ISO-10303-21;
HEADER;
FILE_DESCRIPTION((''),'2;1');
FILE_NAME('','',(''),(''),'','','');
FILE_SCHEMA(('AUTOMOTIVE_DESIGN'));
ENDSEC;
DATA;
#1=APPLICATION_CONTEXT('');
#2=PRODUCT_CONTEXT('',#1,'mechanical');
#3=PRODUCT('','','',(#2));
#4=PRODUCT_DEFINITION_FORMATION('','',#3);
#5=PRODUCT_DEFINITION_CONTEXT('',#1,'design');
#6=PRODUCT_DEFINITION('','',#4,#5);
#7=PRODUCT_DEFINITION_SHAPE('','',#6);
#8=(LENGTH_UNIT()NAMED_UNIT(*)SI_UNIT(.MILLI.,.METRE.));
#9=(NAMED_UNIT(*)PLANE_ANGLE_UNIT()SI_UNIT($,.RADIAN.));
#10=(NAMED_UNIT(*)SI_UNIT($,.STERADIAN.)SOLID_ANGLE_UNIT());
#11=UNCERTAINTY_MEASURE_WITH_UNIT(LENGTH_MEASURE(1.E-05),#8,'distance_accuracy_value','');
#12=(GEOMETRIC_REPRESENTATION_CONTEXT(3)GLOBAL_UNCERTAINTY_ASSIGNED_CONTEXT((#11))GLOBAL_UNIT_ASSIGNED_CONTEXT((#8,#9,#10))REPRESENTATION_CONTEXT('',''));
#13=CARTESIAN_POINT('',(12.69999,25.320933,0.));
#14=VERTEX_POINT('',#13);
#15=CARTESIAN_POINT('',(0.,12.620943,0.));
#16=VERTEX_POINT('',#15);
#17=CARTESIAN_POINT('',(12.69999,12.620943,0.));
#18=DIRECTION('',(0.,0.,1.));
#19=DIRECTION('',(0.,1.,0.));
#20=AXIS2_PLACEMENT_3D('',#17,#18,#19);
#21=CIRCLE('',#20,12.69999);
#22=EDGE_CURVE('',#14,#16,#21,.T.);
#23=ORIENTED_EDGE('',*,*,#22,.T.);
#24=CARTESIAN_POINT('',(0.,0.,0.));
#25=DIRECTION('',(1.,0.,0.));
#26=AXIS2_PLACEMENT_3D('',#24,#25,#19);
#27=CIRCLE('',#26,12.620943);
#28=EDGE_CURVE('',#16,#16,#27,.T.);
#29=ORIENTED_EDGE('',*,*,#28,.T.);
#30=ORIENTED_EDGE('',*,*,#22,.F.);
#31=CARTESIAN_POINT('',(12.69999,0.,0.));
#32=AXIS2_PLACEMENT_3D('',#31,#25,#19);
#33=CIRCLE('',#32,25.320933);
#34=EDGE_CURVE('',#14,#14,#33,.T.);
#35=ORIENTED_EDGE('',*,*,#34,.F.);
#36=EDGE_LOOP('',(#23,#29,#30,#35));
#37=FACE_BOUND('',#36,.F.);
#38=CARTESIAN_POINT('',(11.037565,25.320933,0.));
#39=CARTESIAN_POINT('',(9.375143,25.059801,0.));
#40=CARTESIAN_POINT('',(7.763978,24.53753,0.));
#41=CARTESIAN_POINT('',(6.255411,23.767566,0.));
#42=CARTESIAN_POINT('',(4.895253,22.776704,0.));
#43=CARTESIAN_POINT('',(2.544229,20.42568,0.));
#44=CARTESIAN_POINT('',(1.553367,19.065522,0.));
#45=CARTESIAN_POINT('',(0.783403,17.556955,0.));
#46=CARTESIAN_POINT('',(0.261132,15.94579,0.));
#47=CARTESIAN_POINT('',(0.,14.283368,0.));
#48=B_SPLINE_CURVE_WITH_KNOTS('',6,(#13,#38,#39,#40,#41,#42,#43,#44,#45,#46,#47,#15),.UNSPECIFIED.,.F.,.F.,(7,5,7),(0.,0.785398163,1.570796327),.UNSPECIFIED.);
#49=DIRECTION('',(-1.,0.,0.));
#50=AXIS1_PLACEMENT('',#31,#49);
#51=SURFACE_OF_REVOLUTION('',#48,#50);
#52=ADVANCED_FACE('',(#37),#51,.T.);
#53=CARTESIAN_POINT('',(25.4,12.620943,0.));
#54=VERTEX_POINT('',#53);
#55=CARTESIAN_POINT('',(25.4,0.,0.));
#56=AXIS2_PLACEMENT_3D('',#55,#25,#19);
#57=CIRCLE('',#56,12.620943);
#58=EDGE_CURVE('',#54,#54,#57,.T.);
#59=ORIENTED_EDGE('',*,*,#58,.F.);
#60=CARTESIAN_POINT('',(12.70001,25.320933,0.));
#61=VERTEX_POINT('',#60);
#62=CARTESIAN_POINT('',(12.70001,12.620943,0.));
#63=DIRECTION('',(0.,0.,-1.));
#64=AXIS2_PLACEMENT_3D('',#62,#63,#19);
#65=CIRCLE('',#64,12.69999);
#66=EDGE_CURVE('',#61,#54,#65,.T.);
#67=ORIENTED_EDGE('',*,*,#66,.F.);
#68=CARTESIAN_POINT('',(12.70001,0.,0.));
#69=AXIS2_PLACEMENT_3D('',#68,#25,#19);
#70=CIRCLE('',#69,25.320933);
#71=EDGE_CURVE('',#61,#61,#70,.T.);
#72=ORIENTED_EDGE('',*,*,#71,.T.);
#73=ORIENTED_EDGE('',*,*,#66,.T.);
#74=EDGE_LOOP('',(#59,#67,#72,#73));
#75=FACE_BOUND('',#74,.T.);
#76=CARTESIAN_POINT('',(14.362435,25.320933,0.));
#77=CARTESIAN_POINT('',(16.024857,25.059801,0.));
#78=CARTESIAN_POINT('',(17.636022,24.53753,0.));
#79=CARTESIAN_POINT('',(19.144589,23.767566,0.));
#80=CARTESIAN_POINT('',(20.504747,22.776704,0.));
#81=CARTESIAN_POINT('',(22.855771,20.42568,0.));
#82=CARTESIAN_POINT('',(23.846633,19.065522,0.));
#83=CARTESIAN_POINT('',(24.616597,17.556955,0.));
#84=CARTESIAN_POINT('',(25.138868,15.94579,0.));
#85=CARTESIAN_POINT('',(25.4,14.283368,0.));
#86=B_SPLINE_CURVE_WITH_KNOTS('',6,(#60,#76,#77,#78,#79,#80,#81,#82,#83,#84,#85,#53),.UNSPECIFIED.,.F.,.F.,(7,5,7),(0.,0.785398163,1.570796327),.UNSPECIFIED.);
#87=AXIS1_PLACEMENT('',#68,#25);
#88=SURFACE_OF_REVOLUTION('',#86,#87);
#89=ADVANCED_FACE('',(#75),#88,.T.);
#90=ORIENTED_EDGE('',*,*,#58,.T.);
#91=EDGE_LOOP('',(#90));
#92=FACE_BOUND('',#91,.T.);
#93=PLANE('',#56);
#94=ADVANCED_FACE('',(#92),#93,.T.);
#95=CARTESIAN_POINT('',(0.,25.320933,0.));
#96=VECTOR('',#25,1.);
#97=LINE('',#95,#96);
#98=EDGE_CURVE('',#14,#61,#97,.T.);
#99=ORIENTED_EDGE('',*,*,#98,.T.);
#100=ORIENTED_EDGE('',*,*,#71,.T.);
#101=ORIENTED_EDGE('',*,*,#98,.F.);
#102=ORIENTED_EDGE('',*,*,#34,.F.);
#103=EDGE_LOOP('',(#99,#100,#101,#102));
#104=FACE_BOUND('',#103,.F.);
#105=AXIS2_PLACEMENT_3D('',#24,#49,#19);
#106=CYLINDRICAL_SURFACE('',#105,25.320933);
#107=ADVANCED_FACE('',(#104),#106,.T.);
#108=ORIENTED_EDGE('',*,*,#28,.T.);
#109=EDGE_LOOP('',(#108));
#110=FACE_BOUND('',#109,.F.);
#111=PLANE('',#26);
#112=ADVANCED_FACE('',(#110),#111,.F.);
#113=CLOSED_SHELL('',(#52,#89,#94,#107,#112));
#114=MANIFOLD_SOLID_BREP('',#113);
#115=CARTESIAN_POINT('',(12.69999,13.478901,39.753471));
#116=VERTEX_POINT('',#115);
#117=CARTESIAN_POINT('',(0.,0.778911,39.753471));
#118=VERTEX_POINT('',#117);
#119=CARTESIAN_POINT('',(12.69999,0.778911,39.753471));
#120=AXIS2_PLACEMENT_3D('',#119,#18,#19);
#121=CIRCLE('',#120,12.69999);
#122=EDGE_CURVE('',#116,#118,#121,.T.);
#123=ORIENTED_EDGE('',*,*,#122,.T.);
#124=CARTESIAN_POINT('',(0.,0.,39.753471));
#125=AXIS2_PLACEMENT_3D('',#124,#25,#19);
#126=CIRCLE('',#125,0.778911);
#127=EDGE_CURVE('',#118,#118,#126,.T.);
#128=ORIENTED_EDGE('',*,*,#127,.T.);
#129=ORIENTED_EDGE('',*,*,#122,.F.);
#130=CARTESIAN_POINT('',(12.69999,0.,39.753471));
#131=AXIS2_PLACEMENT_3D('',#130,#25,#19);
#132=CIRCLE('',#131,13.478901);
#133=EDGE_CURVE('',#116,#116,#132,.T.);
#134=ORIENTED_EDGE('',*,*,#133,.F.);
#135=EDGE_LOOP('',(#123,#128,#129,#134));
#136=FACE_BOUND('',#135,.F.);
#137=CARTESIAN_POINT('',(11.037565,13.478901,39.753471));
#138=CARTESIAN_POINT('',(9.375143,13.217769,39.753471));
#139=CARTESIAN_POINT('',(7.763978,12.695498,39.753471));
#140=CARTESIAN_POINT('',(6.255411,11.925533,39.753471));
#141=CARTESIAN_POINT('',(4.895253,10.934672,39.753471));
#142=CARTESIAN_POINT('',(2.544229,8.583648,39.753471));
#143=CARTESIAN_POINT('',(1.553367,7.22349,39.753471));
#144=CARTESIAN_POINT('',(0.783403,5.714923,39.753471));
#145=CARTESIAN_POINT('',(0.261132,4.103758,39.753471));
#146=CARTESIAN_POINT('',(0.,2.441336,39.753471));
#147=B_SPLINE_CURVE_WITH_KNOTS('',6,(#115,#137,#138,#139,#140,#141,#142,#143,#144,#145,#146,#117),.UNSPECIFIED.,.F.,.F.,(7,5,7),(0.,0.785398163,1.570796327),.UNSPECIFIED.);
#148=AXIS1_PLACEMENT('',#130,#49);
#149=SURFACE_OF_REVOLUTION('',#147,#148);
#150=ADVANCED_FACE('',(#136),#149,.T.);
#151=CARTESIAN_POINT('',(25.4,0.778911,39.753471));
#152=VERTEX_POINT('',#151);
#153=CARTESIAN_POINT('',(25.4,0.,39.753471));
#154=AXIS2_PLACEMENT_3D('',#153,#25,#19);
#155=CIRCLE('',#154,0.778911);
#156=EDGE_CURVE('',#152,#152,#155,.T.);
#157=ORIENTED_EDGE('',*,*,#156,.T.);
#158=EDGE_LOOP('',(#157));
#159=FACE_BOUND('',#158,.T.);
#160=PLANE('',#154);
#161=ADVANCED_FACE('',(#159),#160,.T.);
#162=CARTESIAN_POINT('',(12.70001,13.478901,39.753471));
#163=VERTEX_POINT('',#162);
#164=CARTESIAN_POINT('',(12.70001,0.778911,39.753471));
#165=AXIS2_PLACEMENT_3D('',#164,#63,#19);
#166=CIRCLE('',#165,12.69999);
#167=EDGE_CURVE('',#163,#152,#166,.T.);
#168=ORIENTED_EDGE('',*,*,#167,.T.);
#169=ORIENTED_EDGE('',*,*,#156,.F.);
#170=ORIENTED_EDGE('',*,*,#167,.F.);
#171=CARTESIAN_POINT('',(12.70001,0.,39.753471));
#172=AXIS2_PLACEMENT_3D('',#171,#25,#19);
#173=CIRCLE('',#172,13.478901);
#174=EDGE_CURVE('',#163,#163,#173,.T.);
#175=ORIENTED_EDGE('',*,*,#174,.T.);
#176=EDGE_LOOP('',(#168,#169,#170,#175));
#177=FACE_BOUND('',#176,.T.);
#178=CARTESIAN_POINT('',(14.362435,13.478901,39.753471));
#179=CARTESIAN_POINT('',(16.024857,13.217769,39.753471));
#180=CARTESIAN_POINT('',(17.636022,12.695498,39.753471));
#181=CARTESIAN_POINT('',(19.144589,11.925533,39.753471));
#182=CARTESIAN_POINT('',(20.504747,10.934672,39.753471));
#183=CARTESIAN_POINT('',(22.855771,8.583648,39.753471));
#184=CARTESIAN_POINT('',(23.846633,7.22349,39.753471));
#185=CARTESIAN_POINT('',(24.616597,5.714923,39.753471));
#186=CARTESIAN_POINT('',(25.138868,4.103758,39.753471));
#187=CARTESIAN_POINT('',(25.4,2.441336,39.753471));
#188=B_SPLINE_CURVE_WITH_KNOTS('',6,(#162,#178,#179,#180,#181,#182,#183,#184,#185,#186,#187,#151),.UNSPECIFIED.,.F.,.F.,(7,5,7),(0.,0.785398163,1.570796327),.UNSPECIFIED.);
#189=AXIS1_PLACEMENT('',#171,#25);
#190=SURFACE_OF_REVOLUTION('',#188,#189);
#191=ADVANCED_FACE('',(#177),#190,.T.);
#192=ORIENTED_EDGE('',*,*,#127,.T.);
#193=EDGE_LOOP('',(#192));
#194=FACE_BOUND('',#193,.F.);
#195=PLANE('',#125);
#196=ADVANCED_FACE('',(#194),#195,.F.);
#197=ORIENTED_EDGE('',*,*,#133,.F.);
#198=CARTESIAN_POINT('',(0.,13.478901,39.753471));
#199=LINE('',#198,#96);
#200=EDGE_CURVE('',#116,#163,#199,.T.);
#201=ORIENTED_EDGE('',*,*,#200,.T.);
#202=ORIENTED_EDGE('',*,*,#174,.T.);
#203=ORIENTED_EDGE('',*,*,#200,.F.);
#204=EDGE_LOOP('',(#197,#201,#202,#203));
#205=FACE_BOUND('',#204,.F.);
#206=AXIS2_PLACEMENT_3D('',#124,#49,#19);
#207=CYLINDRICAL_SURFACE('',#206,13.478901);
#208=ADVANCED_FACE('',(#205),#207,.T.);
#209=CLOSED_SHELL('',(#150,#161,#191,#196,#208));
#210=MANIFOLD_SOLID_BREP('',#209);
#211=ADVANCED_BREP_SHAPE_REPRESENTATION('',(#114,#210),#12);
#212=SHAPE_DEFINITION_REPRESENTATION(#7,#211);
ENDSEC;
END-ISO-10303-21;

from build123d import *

# Parameters (mm, degrees)
F0_R     = 25.3209330863
F1_DEPTH = 25.4
F2_R     = 12.69999
F3_R     = 13.4789007608
F4_DEPTH = 25.4
F5_R     = 12.69999


# Not quite as in the source:
# - a fillet or chamfer is up to 0.001 mm smaller than in the source, because OpenCascade refuses the exact size


with BuildPart() as f1:
    # F0 (on Right) → F1 (new body)
    with BuildSketch(Plane.YZ):
        Circle(F0_R)
    extrude(amount=F1_DEPTH)

    # F2 (radius 12.7 in the source; OpenCascade refuses exactly that, so slightly less here)
    f2_edges = [f1.edges().sort_by_distance(p)[0] for p in [
        (12.7, 25.320933, 0),
        (0, -25.320933, 0),
        (25.4, -25.320933, 0),
    ]]
    fillet(f2_edges, radius=F2_R)


with BuildPart() as f4:
    # F3 (on Right) → F4 (new body)
    with BuildSketch(Plane.YZ):
        with Locations((0, 39.7534705698)):
            Circle(F3_R)
    extrude(amount=F4_DEPTH)

    # F5 (radius 12.7 in the source; OpenCascade refuses exactly that, so slightly less here)
    f5_edges = [f4.edges().sort_by_distance(p)[0] for p in [
        (12.7, 13.478901, 39.753471),
        (0, -13.478901, 39.753471),
        (25.4, -13.478901, 39.753471),
    ]]
    fillet(f5_edges, radius=F5_R)


solid = Compound([f1.part, f4.part])
